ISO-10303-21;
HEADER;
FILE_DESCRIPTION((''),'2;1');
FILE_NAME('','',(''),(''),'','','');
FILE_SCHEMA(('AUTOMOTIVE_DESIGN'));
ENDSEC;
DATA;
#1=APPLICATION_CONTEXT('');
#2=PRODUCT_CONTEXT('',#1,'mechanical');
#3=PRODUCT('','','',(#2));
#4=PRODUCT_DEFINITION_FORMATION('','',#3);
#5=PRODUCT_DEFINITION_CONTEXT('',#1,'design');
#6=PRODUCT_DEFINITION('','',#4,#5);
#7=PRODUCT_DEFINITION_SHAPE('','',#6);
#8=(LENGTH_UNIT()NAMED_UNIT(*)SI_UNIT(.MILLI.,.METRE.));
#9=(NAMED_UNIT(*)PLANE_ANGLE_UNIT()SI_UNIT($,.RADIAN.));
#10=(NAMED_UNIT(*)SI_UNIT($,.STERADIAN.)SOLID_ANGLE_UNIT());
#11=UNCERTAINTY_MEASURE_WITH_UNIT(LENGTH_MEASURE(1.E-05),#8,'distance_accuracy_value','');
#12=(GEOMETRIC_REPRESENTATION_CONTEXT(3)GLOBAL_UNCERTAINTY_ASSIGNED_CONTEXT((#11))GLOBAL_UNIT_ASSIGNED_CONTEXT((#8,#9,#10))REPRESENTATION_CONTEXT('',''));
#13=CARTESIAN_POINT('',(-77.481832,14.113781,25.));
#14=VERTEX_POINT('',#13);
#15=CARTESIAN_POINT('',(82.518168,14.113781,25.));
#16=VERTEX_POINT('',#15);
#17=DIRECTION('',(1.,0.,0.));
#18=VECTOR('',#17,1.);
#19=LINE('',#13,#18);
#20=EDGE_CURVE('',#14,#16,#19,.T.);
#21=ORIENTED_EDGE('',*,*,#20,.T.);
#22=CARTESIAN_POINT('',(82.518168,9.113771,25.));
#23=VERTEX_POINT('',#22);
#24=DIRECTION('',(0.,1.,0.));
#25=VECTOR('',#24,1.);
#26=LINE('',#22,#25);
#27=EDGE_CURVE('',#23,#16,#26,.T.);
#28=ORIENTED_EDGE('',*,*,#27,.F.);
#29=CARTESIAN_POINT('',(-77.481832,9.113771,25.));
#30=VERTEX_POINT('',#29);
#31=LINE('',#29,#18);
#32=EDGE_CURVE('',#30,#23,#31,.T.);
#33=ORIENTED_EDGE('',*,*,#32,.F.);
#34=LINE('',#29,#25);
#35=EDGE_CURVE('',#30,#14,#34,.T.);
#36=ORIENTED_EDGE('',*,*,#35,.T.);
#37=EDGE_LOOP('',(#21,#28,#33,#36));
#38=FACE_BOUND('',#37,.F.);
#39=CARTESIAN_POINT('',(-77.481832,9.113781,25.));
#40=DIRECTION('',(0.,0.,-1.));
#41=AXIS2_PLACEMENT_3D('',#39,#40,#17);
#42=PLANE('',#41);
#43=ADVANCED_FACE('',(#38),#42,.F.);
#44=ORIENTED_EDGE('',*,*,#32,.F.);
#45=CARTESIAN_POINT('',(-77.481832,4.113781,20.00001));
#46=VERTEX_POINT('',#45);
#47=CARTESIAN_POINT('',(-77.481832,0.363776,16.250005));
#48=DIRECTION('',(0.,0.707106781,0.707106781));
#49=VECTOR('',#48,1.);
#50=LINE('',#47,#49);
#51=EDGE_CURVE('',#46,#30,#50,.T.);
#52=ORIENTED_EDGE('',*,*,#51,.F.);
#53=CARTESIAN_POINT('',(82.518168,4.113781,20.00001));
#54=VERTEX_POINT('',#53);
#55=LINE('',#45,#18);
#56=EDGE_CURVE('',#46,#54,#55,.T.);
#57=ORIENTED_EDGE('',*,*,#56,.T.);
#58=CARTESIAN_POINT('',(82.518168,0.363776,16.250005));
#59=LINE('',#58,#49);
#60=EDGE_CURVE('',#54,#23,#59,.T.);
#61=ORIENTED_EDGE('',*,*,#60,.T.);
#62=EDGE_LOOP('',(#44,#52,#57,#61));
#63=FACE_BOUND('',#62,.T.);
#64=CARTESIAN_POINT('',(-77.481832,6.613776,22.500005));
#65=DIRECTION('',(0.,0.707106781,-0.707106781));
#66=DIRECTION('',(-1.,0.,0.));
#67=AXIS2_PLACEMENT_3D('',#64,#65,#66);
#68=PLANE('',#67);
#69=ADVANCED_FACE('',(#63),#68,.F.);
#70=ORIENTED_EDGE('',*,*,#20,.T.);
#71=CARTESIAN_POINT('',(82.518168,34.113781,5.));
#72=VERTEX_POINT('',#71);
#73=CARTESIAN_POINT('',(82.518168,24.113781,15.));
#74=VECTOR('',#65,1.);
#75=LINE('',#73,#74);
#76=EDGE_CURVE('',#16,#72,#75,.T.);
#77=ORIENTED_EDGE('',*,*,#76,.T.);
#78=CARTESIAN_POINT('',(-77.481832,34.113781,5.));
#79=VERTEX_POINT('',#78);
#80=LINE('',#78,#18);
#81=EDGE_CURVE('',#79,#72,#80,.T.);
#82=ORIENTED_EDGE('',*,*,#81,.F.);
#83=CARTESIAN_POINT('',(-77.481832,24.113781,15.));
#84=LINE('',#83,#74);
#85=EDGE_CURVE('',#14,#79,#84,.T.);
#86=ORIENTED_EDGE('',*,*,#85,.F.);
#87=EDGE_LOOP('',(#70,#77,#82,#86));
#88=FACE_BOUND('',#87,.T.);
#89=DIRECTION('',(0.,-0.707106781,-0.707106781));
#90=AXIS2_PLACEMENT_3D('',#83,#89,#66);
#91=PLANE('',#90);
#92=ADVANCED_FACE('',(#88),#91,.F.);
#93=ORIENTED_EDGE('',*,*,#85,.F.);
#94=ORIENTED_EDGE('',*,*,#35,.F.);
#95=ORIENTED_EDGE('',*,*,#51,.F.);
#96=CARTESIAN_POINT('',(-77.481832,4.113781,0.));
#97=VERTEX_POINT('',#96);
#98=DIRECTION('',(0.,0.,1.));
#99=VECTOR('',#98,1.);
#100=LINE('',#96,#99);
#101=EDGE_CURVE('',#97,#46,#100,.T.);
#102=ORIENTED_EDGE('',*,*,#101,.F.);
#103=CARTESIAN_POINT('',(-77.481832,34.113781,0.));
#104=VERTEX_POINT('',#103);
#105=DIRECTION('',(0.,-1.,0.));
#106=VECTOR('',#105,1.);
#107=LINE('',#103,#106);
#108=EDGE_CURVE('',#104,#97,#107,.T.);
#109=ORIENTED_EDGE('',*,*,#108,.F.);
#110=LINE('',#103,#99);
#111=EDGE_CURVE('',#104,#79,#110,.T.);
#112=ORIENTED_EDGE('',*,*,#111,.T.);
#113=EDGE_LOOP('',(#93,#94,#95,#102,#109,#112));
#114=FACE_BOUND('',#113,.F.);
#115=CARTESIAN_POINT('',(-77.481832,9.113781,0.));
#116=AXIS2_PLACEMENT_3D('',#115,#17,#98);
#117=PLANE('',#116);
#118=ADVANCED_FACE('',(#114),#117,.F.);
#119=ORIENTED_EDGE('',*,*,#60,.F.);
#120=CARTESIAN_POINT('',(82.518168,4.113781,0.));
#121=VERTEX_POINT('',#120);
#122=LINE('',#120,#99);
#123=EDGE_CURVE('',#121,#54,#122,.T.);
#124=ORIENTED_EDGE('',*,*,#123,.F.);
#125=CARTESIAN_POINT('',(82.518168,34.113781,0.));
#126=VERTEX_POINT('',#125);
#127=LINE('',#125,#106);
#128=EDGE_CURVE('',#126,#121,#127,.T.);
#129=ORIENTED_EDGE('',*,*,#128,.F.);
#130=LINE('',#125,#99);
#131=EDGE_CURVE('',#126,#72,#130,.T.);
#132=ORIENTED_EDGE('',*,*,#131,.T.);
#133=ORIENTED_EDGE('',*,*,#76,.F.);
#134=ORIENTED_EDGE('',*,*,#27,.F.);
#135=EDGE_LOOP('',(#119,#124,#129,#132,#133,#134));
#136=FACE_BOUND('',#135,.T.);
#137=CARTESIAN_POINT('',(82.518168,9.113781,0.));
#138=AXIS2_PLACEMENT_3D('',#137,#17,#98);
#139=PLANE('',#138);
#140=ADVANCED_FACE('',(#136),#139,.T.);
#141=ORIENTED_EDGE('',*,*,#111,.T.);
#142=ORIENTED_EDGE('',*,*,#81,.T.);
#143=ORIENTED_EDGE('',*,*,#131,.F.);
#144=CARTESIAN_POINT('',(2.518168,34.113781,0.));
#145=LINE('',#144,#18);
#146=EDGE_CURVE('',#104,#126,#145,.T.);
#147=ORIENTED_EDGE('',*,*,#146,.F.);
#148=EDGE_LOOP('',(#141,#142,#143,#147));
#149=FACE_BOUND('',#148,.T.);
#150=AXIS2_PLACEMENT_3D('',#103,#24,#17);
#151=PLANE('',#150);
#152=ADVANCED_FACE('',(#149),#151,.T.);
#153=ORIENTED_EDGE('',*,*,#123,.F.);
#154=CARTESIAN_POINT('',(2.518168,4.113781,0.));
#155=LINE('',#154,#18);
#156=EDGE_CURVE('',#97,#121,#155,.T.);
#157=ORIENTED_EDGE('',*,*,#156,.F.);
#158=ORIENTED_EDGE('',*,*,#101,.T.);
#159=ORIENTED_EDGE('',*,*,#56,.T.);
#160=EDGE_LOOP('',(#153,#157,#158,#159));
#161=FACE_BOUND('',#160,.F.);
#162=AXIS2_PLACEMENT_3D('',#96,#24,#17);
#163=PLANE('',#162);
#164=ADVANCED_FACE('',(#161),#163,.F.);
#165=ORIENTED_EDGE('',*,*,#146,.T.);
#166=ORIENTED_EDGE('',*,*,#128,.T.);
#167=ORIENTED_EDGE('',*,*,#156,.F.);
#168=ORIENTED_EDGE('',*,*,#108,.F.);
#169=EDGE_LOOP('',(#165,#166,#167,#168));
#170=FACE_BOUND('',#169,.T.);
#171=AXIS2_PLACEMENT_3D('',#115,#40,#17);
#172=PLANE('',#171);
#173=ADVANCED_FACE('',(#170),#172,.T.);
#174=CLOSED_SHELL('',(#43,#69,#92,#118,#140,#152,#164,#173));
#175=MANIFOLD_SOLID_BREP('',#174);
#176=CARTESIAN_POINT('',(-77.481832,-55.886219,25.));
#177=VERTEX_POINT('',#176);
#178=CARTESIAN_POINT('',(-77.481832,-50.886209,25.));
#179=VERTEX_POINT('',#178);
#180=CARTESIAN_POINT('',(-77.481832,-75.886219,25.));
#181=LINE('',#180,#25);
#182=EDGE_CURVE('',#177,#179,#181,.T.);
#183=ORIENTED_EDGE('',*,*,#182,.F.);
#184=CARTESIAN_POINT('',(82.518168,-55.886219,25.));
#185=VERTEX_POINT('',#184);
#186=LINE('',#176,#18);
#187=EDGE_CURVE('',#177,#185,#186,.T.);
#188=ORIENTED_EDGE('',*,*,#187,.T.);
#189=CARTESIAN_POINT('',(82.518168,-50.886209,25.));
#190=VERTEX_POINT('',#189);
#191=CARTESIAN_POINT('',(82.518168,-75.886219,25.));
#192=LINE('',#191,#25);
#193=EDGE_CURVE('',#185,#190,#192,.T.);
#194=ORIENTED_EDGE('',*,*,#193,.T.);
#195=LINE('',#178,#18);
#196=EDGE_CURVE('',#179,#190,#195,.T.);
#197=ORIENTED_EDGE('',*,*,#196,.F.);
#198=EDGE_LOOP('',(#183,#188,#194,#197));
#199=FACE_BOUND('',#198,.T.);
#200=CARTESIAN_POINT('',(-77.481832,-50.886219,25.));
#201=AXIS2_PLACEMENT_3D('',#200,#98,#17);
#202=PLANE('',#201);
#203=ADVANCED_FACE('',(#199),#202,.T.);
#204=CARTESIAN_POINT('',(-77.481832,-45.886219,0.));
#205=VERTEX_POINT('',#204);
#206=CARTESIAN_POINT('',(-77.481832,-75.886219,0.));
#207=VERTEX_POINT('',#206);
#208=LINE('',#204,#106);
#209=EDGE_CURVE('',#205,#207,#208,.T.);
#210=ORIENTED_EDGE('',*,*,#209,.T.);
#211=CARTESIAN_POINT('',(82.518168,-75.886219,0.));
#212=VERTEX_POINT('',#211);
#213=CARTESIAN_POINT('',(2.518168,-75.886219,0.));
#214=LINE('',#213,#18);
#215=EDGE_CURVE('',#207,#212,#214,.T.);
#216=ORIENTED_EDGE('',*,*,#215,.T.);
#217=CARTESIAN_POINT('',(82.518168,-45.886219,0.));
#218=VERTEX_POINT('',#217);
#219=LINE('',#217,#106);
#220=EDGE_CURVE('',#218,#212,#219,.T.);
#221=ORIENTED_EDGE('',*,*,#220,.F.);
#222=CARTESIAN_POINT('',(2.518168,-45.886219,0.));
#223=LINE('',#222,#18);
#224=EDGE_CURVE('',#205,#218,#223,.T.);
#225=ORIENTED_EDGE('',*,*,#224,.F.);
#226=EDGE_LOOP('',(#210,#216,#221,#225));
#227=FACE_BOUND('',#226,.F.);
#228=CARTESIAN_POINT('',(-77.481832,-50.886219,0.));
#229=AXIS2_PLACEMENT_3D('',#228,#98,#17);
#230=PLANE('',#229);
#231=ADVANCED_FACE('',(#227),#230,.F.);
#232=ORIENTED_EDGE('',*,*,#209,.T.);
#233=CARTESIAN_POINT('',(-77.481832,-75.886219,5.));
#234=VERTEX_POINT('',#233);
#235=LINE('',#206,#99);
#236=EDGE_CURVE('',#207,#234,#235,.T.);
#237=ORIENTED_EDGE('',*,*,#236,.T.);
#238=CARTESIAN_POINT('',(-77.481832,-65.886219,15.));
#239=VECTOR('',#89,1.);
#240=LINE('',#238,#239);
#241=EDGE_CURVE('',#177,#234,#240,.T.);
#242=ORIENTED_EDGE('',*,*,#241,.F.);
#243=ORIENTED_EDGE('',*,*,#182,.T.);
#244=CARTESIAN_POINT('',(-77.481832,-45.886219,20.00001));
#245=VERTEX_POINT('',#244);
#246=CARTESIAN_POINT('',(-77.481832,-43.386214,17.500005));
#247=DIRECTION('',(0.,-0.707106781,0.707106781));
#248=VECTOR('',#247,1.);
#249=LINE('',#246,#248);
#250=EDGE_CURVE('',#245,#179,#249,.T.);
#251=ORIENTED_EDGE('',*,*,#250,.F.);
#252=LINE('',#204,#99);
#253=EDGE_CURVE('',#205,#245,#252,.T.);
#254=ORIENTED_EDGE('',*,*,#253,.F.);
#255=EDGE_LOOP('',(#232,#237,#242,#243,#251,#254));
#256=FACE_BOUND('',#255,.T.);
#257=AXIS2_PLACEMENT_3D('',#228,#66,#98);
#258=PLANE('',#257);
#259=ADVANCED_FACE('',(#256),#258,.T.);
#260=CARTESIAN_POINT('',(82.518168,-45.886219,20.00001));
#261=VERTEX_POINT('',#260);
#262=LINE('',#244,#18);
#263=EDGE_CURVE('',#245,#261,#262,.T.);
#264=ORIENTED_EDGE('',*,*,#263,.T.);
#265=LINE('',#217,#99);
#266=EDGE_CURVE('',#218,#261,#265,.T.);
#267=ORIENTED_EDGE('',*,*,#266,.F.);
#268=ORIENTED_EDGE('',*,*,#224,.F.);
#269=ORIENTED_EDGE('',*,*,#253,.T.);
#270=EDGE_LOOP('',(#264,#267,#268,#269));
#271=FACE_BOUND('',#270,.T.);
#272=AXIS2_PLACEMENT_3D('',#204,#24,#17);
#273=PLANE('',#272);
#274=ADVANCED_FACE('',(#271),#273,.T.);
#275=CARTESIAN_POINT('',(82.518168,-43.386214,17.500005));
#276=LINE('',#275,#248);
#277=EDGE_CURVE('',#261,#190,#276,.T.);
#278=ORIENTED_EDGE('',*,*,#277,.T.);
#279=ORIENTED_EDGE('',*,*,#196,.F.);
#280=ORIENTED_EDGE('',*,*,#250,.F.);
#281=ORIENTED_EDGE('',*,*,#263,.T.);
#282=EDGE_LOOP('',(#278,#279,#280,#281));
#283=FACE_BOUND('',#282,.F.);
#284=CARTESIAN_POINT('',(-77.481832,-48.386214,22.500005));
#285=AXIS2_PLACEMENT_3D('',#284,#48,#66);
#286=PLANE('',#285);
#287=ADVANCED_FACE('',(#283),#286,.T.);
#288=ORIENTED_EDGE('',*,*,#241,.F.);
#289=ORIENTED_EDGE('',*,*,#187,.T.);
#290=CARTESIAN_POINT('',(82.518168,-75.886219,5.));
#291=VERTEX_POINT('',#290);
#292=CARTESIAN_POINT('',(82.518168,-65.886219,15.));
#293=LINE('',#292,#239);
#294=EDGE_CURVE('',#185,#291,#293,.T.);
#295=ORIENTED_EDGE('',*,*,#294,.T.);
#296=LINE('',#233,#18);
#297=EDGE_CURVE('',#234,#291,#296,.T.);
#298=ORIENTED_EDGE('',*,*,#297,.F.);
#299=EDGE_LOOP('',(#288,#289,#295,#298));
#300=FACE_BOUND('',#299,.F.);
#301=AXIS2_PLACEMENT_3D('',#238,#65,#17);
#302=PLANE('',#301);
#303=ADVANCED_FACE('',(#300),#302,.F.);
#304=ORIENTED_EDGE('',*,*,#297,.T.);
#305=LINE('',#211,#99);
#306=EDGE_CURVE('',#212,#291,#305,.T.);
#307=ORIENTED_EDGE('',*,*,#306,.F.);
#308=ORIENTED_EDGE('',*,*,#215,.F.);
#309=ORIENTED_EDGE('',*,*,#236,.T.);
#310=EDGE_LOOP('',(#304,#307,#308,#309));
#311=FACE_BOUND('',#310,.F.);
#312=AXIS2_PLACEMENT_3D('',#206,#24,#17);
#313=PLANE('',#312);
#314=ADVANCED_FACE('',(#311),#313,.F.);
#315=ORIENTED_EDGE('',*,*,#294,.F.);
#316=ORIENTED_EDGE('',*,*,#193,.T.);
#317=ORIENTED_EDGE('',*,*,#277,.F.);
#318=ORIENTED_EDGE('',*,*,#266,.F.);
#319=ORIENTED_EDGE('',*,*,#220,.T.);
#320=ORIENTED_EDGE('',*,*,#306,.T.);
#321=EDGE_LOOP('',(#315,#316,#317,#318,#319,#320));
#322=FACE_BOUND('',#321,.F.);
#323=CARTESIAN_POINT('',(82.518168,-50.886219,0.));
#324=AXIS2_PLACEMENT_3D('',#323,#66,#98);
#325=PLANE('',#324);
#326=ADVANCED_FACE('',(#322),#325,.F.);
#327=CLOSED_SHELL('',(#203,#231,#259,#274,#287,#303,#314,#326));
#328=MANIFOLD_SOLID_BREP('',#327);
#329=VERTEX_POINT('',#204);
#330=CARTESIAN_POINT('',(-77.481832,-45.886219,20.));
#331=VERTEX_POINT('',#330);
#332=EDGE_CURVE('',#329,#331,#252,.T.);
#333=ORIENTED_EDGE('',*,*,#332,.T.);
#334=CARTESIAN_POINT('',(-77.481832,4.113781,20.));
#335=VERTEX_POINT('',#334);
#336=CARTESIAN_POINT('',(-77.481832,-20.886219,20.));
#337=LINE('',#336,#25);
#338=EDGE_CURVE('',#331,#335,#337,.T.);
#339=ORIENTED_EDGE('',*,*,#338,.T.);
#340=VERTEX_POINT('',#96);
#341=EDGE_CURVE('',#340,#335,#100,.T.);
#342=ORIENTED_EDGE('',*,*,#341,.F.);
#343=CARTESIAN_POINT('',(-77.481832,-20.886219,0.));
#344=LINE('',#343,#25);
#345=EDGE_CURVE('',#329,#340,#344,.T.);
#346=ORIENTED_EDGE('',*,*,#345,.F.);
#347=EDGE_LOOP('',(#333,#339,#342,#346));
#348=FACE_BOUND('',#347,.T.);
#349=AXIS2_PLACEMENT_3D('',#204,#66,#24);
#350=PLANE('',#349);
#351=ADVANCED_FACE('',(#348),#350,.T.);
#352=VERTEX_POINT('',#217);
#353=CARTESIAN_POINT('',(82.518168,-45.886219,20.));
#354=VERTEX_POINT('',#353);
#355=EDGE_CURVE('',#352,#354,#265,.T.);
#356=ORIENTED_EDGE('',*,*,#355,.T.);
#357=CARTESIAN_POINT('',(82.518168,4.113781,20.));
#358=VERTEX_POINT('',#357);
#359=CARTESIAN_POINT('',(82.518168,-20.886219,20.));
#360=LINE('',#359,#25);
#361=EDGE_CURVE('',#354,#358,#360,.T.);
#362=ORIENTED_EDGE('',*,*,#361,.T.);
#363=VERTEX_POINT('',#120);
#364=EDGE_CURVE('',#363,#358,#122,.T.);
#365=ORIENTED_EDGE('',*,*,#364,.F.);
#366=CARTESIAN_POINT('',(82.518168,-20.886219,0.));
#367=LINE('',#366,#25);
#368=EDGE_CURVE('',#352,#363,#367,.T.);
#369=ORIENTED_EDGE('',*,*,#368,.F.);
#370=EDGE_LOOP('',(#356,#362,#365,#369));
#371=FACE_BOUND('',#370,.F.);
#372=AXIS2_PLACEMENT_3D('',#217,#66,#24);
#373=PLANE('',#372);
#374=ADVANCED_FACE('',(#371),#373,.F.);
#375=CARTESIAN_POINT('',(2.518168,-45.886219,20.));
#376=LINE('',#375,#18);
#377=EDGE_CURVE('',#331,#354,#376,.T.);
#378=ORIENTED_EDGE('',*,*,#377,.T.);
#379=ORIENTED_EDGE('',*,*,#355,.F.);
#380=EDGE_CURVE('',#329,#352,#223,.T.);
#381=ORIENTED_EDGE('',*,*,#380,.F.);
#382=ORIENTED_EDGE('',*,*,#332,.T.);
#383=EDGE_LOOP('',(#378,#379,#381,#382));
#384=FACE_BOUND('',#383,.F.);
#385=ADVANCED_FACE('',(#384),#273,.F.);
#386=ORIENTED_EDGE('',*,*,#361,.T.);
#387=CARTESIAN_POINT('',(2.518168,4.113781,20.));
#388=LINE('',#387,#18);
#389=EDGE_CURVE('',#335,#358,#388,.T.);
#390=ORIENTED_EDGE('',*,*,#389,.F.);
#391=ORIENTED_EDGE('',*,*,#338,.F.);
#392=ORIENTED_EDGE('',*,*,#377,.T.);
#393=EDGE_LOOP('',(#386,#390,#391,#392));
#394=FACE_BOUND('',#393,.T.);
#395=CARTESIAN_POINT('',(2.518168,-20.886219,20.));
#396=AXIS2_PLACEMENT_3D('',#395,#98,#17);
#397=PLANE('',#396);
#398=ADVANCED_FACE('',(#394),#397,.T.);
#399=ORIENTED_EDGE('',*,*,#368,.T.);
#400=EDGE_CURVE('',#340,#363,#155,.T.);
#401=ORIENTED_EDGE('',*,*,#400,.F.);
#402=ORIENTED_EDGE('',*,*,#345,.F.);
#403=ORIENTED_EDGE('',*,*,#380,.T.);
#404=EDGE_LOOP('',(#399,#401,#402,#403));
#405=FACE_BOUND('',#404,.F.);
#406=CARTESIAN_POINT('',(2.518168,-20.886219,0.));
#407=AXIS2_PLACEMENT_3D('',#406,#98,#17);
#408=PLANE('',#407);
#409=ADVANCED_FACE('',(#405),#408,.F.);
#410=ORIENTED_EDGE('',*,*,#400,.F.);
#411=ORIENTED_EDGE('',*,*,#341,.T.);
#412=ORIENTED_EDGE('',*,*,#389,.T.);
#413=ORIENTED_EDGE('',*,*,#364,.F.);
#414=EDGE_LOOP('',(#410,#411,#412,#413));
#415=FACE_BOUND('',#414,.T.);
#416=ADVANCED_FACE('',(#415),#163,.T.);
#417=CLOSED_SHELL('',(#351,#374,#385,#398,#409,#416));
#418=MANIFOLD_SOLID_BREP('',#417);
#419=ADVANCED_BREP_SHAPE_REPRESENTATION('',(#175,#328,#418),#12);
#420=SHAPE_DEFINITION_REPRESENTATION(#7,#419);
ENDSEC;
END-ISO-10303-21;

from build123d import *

# Parameters (mm, degrees)
F0_W      = 160
F0_H      = 5
F1_DEPTH  = 25
F0_H_2    = 50
F2_DEPTH  = 20
F3_SIZE   = 4.99999
F3_2_SIZE = 4.99999
F4_DEPTH  = 25
F5_DEPTH  = 25
F6_SIZE   = 20
F6_2_SIZE = 20


# Not quite as in the source:
# - a fillet or chamfer is up to 0.001 mm smaller than in the source, because OpenCascade refuses the exact size


with BuildPart() as f1:
    # F0 (on Top) → F1 (new body)
    with BuildSketch(Plane.XY):
        with Locations((2.5181677192, 6.6137810796)):
            Rectangle(F0_W, F0_H)
    extrude(amount=F1_DEPTH)

    # F3 (size 5 in the source; OpenCascade refuses exactly that, so slightly less here)
    f3_edges = [f1.edges().sort_by_distance(p)[0] for p in [
        (2.518168, 4.113781, 25),
    ]]
    chamfer(f3_edges, length=F3_SIZE)

    # F4 (add): a face of the model
    f4_faces = [f1.faces().sort_by_distance(p)[0] for p in [
        (2.5181677192, 9.1137810796, 12.5),
    ]]
    extrude(f4_faces, amount=F4_DEPTH)

    # F6
    f6_edges = [f1.edges().sort_by_distance(p)[0] for p in [
        (2.518168, 34.113781, 25),
    ]]
    chamfer(f6_edges, length=F6_SIZE)


with BuildPart() as f1b:
    # F0 (on Top) → F1, piece 2 (new body)
    with BuildSketch(Plane.XY):
        with Locations((2.5181677192, -48.3862189204)):
            Rectangle(F0_W, F0_H)
    extrude(amount=F1_DEPTH)

    # F3#2 (size 5 in the source; OpenCascade refuses exactly that, so slightly less here)
    f3_2_edges = [f1b.edges().sort_by_distance(p)[0] for p in [
        (2.518168, -45.886219, 25),
    ]]
    chamfer(f3_2_edges, length=F3_2_SIZE)

    # F5 (add): a face of the model
    f5_faces = [f1b.faces().sort_by_distance(p)[0] for p in [
        (2.5181677192, -50.8862189204, 12.5),
    ]]
    extrude(f5_faces, amount=F5_DEPTH)

    # F6#2
    f6_2_edges = [f1b.edges().sort_by_distance(p)[0] for p in [
        (2.518168, -75.886219, 25),
    ]]
    chamfer(f6_2_edges, length=F6_2_SIZE)


with BuildPart() as f2:
    # F0 (on Top) → F2 (new body)
    with BuildSketch(Plane.XY):
        with Locations((2.5181677192, -20.8862189204)):
            Rectangle(F0_W, F0_H_2)
    extrude(amount=F2_DEPTH)


solid = Compound([f1.part, f1b.part, f2.part])
